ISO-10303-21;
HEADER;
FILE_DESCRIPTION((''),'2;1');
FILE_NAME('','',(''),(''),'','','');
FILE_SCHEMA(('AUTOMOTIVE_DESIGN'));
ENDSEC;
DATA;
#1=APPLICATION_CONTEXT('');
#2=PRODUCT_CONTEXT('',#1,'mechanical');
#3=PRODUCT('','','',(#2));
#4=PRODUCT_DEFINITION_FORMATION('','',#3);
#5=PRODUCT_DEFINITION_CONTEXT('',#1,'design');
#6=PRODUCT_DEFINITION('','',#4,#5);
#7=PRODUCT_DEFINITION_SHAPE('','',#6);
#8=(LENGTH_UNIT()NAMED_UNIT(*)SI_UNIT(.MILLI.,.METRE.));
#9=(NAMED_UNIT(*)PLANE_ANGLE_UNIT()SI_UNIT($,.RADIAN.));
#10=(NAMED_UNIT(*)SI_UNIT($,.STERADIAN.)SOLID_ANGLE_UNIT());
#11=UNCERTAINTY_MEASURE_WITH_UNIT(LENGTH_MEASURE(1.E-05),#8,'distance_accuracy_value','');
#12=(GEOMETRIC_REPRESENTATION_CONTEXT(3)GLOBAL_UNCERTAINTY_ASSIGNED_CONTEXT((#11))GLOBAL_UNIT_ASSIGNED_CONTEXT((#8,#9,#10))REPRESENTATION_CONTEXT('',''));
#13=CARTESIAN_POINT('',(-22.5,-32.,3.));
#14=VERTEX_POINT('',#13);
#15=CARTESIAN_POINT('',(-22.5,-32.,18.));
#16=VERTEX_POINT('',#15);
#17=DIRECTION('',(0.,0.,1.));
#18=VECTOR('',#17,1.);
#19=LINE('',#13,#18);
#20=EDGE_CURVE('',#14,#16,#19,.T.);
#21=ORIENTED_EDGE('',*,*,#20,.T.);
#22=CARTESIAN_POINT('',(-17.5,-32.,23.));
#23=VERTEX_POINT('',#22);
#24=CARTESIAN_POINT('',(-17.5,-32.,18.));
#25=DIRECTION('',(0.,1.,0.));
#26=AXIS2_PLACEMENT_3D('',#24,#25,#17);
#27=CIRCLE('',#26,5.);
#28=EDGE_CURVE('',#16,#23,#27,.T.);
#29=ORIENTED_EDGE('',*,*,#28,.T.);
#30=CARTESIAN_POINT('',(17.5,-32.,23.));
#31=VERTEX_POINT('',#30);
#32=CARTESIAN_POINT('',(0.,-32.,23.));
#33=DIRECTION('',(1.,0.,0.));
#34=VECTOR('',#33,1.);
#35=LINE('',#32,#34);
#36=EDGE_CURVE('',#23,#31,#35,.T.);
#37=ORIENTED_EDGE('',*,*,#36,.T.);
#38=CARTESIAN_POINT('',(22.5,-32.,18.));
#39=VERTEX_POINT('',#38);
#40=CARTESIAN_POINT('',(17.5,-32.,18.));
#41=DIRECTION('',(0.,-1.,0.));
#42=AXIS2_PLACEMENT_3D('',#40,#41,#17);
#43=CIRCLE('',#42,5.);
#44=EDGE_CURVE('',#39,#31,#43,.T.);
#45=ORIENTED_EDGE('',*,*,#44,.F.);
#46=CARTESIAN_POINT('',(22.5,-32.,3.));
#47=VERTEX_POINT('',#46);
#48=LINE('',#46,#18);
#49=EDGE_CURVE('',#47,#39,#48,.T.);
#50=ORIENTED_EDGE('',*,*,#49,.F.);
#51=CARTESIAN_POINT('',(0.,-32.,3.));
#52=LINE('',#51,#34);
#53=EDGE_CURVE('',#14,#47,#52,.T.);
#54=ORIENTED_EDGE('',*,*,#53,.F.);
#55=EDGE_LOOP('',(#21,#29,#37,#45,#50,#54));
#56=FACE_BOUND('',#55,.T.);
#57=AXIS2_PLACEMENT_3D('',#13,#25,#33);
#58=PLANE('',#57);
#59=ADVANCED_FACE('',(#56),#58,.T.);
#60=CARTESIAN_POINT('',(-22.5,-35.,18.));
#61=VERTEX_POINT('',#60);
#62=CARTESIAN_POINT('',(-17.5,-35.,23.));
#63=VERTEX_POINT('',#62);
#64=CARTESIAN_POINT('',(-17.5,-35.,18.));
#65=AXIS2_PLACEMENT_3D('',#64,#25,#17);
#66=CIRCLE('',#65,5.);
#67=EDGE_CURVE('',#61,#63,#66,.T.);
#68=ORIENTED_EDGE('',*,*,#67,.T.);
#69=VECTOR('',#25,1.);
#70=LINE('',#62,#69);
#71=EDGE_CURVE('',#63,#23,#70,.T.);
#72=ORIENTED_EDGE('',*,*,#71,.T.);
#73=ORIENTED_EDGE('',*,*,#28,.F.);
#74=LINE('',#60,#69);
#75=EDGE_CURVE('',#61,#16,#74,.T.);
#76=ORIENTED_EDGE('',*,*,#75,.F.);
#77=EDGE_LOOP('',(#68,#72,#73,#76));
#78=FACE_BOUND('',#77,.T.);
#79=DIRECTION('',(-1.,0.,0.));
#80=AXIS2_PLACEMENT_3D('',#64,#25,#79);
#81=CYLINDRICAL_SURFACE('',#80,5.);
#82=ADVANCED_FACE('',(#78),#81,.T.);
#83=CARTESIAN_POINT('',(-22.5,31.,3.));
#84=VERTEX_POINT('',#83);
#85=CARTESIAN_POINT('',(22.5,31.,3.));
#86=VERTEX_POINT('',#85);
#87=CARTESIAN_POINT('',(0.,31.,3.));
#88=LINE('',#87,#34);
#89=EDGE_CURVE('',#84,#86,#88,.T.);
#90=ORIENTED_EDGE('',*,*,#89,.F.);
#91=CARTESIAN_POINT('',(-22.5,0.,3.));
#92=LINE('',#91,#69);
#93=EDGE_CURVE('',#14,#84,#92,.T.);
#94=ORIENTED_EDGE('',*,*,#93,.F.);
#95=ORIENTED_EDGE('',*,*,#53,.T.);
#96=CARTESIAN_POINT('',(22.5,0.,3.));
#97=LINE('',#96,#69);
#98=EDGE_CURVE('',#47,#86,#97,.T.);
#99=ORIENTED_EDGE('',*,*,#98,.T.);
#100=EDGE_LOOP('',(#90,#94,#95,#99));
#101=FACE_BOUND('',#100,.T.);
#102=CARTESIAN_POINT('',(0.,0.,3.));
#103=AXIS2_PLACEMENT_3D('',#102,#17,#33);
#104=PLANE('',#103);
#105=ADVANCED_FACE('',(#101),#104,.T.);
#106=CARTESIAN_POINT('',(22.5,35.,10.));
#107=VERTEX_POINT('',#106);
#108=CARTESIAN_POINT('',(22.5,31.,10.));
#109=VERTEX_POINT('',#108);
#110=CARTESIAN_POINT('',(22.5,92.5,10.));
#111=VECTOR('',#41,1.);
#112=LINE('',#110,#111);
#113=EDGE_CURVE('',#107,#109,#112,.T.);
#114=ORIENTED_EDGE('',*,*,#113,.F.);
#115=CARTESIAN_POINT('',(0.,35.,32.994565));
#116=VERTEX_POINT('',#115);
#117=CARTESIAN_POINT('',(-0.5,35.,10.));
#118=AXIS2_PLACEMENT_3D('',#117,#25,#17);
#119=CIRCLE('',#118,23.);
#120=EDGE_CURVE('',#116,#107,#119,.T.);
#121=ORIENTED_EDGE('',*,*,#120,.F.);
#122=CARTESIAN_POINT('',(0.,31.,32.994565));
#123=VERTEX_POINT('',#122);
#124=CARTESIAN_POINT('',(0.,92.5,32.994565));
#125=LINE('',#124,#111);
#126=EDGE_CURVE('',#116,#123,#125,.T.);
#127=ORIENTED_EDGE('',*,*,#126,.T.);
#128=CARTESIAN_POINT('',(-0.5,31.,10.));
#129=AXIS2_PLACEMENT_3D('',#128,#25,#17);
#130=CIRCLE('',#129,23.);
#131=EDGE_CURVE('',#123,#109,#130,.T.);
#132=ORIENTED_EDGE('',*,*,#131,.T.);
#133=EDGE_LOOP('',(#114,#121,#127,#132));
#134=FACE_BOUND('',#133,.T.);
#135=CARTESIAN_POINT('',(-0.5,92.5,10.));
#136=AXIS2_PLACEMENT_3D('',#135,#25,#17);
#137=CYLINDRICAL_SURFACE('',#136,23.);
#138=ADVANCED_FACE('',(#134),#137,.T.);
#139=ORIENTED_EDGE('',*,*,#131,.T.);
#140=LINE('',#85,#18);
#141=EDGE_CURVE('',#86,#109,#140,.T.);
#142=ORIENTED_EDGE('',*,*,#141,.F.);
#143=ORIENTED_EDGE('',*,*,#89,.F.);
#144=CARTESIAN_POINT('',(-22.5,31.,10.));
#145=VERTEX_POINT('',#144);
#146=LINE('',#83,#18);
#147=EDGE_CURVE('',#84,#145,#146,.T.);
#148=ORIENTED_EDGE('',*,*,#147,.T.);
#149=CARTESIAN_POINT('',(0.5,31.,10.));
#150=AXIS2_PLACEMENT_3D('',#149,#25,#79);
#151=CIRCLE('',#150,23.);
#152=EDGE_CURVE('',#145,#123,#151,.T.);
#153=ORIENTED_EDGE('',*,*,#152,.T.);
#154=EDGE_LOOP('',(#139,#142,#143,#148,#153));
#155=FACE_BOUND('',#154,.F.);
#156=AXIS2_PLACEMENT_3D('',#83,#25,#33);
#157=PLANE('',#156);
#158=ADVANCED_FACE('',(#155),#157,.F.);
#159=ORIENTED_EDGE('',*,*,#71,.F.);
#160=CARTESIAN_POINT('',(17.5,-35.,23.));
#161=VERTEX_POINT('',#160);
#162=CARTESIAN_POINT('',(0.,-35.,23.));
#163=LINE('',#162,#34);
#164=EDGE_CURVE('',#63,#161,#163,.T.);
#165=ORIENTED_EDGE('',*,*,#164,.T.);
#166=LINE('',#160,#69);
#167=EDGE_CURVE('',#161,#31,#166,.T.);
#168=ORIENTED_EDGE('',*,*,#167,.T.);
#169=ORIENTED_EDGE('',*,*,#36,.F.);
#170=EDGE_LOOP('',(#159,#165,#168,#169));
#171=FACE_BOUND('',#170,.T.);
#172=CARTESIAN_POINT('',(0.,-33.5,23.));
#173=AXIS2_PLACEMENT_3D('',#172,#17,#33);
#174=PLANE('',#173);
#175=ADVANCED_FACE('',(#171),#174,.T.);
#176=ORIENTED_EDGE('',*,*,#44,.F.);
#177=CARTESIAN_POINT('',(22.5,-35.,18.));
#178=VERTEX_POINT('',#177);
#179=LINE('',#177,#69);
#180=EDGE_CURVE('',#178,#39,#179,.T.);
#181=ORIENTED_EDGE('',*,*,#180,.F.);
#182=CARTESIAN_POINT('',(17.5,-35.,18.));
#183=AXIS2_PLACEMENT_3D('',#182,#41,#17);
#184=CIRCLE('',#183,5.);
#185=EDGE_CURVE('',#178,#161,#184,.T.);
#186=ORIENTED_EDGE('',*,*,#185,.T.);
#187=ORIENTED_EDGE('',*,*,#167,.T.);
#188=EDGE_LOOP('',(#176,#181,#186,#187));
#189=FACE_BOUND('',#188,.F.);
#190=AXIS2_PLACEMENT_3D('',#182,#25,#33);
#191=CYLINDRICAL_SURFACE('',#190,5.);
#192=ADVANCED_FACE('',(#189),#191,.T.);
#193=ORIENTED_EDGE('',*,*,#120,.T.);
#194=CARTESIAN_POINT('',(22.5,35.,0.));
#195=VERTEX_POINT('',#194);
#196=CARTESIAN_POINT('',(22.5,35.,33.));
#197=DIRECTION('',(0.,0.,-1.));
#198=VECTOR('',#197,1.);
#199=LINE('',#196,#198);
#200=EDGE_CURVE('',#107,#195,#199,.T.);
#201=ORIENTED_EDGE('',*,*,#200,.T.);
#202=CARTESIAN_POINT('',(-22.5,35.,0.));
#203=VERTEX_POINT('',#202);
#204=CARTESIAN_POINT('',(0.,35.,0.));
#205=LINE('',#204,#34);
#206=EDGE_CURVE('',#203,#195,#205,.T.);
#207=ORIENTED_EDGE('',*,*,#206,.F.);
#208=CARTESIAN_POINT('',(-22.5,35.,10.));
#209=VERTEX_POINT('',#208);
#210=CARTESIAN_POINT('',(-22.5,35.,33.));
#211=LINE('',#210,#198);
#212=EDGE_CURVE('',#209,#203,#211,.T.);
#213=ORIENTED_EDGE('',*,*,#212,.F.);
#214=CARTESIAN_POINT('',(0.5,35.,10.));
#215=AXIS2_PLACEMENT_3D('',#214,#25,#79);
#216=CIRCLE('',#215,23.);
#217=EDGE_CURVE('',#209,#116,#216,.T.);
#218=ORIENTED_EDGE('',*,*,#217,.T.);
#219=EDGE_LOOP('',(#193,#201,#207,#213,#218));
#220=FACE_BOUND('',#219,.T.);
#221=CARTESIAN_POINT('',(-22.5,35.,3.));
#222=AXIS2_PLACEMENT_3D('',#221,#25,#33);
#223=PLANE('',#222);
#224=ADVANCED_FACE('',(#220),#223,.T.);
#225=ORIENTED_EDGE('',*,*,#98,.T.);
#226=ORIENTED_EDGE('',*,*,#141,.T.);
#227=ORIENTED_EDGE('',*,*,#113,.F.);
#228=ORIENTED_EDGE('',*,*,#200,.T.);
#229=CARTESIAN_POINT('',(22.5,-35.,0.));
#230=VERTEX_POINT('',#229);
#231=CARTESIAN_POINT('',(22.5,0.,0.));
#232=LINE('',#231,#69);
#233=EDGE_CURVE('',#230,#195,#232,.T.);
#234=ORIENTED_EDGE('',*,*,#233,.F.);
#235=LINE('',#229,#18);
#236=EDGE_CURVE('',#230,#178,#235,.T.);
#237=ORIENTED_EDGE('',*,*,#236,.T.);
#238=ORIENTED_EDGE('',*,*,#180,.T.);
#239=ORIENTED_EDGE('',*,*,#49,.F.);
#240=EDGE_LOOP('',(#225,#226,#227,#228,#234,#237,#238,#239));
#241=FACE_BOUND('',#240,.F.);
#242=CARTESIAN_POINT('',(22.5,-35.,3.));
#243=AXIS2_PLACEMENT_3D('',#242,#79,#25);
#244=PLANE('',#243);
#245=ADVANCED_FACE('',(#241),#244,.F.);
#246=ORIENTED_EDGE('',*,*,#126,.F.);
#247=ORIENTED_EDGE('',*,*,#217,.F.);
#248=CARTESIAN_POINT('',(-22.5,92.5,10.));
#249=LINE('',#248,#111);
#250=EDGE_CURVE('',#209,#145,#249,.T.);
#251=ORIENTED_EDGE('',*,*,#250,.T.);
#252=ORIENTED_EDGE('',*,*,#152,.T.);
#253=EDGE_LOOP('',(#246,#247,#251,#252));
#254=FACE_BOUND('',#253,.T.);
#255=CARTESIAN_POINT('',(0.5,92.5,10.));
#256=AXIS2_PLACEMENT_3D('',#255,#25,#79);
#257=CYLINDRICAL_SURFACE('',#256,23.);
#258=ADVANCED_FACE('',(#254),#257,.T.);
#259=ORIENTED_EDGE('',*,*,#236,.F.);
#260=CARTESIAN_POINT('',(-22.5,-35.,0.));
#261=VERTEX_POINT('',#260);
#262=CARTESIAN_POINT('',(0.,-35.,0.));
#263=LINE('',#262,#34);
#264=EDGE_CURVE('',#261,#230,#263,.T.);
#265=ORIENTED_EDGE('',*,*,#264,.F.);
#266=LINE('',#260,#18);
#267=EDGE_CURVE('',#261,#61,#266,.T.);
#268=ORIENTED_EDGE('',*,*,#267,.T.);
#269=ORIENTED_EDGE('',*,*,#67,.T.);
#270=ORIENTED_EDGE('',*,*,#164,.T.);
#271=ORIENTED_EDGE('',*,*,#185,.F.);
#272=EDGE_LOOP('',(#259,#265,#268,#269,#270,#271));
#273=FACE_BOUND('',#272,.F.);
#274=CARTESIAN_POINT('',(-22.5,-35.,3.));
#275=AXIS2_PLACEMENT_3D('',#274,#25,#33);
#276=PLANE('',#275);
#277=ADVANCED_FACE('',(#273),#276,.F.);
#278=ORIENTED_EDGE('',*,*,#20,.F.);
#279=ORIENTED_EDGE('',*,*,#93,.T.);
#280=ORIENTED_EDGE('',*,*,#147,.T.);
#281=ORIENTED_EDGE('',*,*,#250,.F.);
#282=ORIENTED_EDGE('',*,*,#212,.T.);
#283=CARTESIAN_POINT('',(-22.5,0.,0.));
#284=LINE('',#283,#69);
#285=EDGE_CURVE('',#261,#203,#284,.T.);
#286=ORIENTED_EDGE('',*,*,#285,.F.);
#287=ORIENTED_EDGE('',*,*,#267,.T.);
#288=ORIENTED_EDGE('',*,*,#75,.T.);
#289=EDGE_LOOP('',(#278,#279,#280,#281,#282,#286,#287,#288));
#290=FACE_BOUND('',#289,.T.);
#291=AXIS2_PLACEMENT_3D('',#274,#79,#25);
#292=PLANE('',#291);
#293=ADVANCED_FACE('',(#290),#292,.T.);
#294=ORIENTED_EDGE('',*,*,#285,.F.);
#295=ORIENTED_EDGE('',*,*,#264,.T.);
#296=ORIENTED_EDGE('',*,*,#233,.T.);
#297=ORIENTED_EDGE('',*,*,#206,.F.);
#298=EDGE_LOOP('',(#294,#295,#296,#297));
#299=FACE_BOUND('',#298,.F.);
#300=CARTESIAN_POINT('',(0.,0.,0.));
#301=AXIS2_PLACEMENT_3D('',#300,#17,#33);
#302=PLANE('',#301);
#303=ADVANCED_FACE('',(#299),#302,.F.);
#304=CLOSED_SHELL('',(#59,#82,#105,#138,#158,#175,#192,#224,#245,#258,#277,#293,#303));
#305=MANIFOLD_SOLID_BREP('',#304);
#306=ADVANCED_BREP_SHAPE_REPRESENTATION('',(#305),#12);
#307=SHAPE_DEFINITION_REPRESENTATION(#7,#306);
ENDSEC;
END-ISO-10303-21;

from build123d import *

# Parameters (mm, degrees)
F0_W        = 45
F0_H        = 70
F1_DEPTH    = 3
F2_W        = 45
F2_H        = 4
F3_DEPTH    = 30
F4_T1_DEPTH = 119
F5_W        = 45
F5_H        = 3
F6_DEPTH    = 20
F7_R        = 5


# Not quite as in the source:
# - a fillet or chamfer that OpenCascade refuses, or shapes differently, is made with other operations: its cross-section is extruded or revolved along the edge and cut away or added


with BuildPart() as f1:
    # F0 (on Top) → F1 (new body)
    with BuildSketch(Plane.XY):
        Rectangle(F0_W, F0_H)
    extrude(amount=F1_DEPTH)

    # F2 (on face) → F3 (join)
    with BuildSketch(Plane.XY.offset(3)):
        with Locations((0, 33)):
            Rectangle(F2_W, F2_H)
    extrude(amount=F3_DEPTH)

    # F4: fillet of radius 23 on 2 edges, made by hand

    # F4_s2 → F4_t1 (cut)
    with BuildSketch(Plane.XZ.offset(-92.5)):
        with BuildLine():
            ThreePointArc((-22.5, 10), (-15.7634559673, 26.2634559673), (0.5, 33))
            Line((0.5, 33), (-22.5, 33))
            Line((-22.5, 33), (-22.5, 10))
        make_face()
        with BuildLine():
            ThreePointArc((-0.5, 33), (15.7634559673, 26.2634559673), (22.5, 10))
            Line((22.5, 10), (22.5, 33))
            Line((22.5, 33), (-0.5, 33))
        make_face()
    extrude(amount=F4_T1_DEPTH, mode=Mode.SUBTRACT)

    # F5 (on face) → F6 (join)
    with BuildSketch(Plane.XY.offset(3)):
        with Locations((0, -33.5)):
            Rectangle(F5_W, F5_H)
    extrude(amount=F6_DEPTH)

    # F7
    f7_edges = [f1.edges().sort_by_distance(p)[0] for p in [
        (-22.5, -33.5, 23),
        (22.5, -33.5, 23),
    ]]
    fillet(f7_edges, radius=F7_R)


solid = f1.part
